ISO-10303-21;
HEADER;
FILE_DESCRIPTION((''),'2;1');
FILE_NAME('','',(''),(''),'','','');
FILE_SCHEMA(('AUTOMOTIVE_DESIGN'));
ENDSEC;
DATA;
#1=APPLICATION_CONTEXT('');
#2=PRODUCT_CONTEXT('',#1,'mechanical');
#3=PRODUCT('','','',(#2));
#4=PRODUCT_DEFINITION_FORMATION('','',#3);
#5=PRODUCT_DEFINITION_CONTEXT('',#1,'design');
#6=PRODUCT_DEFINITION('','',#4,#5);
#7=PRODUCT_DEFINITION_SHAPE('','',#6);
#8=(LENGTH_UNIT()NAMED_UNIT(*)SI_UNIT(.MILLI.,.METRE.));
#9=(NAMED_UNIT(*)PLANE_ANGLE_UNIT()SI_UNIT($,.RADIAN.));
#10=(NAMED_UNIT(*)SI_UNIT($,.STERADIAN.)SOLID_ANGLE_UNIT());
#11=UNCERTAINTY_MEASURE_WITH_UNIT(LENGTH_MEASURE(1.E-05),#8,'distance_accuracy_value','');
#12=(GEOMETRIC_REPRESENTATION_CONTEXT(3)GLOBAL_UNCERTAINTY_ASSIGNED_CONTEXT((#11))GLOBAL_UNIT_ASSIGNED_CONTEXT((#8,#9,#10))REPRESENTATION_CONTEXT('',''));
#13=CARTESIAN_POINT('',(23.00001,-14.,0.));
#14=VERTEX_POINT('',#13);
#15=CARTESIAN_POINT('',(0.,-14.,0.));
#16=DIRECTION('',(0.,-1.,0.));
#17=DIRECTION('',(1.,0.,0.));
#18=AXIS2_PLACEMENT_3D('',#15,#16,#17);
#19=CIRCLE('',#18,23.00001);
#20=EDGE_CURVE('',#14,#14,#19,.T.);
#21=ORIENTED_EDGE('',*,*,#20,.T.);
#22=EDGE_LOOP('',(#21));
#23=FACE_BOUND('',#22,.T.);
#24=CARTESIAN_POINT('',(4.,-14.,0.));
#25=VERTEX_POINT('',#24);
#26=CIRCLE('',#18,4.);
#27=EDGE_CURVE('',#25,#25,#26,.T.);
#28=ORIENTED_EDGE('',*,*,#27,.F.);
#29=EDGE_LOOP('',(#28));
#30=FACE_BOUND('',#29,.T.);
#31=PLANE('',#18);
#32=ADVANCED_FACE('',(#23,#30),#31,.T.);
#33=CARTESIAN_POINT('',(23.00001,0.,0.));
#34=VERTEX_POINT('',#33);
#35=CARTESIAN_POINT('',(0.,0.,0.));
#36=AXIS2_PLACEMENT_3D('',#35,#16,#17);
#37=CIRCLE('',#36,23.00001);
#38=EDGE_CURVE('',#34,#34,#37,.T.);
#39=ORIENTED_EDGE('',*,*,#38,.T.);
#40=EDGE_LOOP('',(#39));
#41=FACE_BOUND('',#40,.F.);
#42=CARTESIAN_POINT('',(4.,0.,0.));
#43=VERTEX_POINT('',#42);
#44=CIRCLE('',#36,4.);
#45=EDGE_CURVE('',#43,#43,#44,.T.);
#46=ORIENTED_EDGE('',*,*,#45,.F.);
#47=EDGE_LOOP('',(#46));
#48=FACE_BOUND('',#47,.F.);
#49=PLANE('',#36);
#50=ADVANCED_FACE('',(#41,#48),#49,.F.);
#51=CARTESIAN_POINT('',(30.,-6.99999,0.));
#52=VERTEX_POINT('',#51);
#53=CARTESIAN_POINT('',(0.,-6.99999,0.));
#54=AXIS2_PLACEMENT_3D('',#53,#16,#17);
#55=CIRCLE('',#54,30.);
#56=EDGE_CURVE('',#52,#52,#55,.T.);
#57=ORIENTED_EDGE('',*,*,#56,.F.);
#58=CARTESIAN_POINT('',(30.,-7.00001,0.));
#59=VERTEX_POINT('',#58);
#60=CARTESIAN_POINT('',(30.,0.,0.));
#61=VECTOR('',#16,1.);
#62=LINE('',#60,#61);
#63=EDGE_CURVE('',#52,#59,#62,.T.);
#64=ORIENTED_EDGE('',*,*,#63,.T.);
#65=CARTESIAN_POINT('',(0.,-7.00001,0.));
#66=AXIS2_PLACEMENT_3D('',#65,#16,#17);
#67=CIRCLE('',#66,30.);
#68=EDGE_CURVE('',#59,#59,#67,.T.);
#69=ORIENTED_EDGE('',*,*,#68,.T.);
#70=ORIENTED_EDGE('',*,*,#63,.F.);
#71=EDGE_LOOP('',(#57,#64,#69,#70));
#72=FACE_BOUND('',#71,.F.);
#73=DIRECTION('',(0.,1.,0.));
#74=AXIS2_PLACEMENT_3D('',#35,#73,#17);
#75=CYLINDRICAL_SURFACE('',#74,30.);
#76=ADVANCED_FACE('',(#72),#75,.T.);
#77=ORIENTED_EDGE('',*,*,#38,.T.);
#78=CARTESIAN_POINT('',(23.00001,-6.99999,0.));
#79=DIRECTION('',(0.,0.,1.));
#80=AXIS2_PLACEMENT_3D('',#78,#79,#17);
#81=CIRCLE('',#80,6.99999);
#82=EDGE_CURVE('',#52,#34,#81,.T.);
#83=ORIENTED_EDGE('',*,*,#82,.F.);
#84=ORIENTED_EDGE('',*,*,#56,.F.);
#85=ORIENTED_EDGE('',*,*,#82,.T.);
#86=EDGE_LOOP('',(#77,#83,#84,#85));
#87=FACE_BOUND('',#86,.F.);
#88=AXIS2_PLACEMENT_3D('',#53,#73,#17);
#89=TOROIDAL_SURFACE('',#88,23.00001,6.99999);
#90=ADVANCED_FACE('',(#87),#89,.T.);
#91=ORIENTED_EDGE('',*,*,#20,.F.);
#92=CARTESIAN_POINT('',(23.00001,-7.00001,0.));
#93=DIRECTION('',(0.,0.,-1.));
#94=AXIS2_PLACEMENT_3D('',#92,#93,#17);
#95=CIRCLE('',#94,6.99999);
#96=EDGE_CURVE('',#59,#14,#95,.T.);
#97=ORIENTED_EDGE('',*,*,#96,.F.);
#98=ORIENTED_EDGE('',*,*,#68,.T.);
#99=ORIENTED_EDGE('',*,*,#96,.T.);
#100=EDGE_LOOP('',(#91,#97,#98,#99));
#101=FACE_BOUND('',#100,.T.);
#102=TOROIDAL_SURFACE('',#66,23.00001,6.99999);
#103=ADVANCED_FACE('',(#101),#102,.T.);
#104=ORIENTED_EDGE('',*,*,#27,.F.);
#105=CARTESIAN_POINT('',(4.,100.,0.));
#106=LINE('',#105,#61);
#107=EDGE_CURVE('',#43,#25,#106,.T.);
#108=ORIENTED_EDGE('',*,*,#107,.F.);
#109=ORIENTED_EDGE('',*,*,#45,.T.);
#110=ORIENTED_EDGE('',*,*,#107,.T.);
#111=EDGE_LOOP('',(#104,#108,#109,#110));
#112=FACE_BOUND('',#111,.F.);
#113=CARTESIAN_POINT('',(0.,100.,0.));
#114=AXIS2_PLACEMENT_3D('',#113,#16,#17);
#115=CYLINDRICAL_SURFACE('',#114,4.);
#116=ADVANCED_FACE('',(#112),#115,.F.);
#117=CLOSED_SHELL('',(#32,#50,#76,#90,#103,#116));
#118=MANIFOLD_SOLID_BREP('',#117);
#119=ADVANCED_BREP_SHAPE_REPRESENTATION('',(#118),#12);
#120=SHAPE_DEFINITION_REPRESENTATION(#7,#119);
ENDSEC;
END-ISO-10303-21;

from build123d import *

# Parameters (mm, degrees)
F0_R     = 30
F1_DEPTH = 14
F2_R     = 6.99999
F4_D     = 8
F4_DEPTH = 100
F4_TIP   = 2.4034424761


# Not quite as in the source:
# - a fillet or chamfer is up to 0.001 mm smaller than in the source, because OpenCascade refuses the exact size


with BuildPart() as f1:
    # F0 (on Front) → F1 (new body)
    with BuildSketch(Plane.XZ):
        Circle(F0_R)
    extrude(amount=F1_DEPTH)

    # F2 (radius 7 in the source; OpenCascade refuses exactly that, so slightly less here)
    f2_edges = [f1.edges().sort_by_distance(p)[0] for p in [
        (-30, -14, 0),
        (-30, 0, 0),
    ]]
    fillet(f2_edges, radius=F2_R)

    # F4
    with Locations(Plane(origin=(0, 0, 0), x_dir=(-1, 0, 0), z_dir=(0, 1, 0))):
        with Locations((0, 0)):
            Hole(F4_D / 2, depth=F4_DEPTH)
            with Locations((0, 0, -(F4_DEPTH + F4_TIP / 2))):  # 118° drill point
                Cone(0, F4_D / 2, F4_TIP, mode=Mode.SUBTRACT)


solid = f1.part
